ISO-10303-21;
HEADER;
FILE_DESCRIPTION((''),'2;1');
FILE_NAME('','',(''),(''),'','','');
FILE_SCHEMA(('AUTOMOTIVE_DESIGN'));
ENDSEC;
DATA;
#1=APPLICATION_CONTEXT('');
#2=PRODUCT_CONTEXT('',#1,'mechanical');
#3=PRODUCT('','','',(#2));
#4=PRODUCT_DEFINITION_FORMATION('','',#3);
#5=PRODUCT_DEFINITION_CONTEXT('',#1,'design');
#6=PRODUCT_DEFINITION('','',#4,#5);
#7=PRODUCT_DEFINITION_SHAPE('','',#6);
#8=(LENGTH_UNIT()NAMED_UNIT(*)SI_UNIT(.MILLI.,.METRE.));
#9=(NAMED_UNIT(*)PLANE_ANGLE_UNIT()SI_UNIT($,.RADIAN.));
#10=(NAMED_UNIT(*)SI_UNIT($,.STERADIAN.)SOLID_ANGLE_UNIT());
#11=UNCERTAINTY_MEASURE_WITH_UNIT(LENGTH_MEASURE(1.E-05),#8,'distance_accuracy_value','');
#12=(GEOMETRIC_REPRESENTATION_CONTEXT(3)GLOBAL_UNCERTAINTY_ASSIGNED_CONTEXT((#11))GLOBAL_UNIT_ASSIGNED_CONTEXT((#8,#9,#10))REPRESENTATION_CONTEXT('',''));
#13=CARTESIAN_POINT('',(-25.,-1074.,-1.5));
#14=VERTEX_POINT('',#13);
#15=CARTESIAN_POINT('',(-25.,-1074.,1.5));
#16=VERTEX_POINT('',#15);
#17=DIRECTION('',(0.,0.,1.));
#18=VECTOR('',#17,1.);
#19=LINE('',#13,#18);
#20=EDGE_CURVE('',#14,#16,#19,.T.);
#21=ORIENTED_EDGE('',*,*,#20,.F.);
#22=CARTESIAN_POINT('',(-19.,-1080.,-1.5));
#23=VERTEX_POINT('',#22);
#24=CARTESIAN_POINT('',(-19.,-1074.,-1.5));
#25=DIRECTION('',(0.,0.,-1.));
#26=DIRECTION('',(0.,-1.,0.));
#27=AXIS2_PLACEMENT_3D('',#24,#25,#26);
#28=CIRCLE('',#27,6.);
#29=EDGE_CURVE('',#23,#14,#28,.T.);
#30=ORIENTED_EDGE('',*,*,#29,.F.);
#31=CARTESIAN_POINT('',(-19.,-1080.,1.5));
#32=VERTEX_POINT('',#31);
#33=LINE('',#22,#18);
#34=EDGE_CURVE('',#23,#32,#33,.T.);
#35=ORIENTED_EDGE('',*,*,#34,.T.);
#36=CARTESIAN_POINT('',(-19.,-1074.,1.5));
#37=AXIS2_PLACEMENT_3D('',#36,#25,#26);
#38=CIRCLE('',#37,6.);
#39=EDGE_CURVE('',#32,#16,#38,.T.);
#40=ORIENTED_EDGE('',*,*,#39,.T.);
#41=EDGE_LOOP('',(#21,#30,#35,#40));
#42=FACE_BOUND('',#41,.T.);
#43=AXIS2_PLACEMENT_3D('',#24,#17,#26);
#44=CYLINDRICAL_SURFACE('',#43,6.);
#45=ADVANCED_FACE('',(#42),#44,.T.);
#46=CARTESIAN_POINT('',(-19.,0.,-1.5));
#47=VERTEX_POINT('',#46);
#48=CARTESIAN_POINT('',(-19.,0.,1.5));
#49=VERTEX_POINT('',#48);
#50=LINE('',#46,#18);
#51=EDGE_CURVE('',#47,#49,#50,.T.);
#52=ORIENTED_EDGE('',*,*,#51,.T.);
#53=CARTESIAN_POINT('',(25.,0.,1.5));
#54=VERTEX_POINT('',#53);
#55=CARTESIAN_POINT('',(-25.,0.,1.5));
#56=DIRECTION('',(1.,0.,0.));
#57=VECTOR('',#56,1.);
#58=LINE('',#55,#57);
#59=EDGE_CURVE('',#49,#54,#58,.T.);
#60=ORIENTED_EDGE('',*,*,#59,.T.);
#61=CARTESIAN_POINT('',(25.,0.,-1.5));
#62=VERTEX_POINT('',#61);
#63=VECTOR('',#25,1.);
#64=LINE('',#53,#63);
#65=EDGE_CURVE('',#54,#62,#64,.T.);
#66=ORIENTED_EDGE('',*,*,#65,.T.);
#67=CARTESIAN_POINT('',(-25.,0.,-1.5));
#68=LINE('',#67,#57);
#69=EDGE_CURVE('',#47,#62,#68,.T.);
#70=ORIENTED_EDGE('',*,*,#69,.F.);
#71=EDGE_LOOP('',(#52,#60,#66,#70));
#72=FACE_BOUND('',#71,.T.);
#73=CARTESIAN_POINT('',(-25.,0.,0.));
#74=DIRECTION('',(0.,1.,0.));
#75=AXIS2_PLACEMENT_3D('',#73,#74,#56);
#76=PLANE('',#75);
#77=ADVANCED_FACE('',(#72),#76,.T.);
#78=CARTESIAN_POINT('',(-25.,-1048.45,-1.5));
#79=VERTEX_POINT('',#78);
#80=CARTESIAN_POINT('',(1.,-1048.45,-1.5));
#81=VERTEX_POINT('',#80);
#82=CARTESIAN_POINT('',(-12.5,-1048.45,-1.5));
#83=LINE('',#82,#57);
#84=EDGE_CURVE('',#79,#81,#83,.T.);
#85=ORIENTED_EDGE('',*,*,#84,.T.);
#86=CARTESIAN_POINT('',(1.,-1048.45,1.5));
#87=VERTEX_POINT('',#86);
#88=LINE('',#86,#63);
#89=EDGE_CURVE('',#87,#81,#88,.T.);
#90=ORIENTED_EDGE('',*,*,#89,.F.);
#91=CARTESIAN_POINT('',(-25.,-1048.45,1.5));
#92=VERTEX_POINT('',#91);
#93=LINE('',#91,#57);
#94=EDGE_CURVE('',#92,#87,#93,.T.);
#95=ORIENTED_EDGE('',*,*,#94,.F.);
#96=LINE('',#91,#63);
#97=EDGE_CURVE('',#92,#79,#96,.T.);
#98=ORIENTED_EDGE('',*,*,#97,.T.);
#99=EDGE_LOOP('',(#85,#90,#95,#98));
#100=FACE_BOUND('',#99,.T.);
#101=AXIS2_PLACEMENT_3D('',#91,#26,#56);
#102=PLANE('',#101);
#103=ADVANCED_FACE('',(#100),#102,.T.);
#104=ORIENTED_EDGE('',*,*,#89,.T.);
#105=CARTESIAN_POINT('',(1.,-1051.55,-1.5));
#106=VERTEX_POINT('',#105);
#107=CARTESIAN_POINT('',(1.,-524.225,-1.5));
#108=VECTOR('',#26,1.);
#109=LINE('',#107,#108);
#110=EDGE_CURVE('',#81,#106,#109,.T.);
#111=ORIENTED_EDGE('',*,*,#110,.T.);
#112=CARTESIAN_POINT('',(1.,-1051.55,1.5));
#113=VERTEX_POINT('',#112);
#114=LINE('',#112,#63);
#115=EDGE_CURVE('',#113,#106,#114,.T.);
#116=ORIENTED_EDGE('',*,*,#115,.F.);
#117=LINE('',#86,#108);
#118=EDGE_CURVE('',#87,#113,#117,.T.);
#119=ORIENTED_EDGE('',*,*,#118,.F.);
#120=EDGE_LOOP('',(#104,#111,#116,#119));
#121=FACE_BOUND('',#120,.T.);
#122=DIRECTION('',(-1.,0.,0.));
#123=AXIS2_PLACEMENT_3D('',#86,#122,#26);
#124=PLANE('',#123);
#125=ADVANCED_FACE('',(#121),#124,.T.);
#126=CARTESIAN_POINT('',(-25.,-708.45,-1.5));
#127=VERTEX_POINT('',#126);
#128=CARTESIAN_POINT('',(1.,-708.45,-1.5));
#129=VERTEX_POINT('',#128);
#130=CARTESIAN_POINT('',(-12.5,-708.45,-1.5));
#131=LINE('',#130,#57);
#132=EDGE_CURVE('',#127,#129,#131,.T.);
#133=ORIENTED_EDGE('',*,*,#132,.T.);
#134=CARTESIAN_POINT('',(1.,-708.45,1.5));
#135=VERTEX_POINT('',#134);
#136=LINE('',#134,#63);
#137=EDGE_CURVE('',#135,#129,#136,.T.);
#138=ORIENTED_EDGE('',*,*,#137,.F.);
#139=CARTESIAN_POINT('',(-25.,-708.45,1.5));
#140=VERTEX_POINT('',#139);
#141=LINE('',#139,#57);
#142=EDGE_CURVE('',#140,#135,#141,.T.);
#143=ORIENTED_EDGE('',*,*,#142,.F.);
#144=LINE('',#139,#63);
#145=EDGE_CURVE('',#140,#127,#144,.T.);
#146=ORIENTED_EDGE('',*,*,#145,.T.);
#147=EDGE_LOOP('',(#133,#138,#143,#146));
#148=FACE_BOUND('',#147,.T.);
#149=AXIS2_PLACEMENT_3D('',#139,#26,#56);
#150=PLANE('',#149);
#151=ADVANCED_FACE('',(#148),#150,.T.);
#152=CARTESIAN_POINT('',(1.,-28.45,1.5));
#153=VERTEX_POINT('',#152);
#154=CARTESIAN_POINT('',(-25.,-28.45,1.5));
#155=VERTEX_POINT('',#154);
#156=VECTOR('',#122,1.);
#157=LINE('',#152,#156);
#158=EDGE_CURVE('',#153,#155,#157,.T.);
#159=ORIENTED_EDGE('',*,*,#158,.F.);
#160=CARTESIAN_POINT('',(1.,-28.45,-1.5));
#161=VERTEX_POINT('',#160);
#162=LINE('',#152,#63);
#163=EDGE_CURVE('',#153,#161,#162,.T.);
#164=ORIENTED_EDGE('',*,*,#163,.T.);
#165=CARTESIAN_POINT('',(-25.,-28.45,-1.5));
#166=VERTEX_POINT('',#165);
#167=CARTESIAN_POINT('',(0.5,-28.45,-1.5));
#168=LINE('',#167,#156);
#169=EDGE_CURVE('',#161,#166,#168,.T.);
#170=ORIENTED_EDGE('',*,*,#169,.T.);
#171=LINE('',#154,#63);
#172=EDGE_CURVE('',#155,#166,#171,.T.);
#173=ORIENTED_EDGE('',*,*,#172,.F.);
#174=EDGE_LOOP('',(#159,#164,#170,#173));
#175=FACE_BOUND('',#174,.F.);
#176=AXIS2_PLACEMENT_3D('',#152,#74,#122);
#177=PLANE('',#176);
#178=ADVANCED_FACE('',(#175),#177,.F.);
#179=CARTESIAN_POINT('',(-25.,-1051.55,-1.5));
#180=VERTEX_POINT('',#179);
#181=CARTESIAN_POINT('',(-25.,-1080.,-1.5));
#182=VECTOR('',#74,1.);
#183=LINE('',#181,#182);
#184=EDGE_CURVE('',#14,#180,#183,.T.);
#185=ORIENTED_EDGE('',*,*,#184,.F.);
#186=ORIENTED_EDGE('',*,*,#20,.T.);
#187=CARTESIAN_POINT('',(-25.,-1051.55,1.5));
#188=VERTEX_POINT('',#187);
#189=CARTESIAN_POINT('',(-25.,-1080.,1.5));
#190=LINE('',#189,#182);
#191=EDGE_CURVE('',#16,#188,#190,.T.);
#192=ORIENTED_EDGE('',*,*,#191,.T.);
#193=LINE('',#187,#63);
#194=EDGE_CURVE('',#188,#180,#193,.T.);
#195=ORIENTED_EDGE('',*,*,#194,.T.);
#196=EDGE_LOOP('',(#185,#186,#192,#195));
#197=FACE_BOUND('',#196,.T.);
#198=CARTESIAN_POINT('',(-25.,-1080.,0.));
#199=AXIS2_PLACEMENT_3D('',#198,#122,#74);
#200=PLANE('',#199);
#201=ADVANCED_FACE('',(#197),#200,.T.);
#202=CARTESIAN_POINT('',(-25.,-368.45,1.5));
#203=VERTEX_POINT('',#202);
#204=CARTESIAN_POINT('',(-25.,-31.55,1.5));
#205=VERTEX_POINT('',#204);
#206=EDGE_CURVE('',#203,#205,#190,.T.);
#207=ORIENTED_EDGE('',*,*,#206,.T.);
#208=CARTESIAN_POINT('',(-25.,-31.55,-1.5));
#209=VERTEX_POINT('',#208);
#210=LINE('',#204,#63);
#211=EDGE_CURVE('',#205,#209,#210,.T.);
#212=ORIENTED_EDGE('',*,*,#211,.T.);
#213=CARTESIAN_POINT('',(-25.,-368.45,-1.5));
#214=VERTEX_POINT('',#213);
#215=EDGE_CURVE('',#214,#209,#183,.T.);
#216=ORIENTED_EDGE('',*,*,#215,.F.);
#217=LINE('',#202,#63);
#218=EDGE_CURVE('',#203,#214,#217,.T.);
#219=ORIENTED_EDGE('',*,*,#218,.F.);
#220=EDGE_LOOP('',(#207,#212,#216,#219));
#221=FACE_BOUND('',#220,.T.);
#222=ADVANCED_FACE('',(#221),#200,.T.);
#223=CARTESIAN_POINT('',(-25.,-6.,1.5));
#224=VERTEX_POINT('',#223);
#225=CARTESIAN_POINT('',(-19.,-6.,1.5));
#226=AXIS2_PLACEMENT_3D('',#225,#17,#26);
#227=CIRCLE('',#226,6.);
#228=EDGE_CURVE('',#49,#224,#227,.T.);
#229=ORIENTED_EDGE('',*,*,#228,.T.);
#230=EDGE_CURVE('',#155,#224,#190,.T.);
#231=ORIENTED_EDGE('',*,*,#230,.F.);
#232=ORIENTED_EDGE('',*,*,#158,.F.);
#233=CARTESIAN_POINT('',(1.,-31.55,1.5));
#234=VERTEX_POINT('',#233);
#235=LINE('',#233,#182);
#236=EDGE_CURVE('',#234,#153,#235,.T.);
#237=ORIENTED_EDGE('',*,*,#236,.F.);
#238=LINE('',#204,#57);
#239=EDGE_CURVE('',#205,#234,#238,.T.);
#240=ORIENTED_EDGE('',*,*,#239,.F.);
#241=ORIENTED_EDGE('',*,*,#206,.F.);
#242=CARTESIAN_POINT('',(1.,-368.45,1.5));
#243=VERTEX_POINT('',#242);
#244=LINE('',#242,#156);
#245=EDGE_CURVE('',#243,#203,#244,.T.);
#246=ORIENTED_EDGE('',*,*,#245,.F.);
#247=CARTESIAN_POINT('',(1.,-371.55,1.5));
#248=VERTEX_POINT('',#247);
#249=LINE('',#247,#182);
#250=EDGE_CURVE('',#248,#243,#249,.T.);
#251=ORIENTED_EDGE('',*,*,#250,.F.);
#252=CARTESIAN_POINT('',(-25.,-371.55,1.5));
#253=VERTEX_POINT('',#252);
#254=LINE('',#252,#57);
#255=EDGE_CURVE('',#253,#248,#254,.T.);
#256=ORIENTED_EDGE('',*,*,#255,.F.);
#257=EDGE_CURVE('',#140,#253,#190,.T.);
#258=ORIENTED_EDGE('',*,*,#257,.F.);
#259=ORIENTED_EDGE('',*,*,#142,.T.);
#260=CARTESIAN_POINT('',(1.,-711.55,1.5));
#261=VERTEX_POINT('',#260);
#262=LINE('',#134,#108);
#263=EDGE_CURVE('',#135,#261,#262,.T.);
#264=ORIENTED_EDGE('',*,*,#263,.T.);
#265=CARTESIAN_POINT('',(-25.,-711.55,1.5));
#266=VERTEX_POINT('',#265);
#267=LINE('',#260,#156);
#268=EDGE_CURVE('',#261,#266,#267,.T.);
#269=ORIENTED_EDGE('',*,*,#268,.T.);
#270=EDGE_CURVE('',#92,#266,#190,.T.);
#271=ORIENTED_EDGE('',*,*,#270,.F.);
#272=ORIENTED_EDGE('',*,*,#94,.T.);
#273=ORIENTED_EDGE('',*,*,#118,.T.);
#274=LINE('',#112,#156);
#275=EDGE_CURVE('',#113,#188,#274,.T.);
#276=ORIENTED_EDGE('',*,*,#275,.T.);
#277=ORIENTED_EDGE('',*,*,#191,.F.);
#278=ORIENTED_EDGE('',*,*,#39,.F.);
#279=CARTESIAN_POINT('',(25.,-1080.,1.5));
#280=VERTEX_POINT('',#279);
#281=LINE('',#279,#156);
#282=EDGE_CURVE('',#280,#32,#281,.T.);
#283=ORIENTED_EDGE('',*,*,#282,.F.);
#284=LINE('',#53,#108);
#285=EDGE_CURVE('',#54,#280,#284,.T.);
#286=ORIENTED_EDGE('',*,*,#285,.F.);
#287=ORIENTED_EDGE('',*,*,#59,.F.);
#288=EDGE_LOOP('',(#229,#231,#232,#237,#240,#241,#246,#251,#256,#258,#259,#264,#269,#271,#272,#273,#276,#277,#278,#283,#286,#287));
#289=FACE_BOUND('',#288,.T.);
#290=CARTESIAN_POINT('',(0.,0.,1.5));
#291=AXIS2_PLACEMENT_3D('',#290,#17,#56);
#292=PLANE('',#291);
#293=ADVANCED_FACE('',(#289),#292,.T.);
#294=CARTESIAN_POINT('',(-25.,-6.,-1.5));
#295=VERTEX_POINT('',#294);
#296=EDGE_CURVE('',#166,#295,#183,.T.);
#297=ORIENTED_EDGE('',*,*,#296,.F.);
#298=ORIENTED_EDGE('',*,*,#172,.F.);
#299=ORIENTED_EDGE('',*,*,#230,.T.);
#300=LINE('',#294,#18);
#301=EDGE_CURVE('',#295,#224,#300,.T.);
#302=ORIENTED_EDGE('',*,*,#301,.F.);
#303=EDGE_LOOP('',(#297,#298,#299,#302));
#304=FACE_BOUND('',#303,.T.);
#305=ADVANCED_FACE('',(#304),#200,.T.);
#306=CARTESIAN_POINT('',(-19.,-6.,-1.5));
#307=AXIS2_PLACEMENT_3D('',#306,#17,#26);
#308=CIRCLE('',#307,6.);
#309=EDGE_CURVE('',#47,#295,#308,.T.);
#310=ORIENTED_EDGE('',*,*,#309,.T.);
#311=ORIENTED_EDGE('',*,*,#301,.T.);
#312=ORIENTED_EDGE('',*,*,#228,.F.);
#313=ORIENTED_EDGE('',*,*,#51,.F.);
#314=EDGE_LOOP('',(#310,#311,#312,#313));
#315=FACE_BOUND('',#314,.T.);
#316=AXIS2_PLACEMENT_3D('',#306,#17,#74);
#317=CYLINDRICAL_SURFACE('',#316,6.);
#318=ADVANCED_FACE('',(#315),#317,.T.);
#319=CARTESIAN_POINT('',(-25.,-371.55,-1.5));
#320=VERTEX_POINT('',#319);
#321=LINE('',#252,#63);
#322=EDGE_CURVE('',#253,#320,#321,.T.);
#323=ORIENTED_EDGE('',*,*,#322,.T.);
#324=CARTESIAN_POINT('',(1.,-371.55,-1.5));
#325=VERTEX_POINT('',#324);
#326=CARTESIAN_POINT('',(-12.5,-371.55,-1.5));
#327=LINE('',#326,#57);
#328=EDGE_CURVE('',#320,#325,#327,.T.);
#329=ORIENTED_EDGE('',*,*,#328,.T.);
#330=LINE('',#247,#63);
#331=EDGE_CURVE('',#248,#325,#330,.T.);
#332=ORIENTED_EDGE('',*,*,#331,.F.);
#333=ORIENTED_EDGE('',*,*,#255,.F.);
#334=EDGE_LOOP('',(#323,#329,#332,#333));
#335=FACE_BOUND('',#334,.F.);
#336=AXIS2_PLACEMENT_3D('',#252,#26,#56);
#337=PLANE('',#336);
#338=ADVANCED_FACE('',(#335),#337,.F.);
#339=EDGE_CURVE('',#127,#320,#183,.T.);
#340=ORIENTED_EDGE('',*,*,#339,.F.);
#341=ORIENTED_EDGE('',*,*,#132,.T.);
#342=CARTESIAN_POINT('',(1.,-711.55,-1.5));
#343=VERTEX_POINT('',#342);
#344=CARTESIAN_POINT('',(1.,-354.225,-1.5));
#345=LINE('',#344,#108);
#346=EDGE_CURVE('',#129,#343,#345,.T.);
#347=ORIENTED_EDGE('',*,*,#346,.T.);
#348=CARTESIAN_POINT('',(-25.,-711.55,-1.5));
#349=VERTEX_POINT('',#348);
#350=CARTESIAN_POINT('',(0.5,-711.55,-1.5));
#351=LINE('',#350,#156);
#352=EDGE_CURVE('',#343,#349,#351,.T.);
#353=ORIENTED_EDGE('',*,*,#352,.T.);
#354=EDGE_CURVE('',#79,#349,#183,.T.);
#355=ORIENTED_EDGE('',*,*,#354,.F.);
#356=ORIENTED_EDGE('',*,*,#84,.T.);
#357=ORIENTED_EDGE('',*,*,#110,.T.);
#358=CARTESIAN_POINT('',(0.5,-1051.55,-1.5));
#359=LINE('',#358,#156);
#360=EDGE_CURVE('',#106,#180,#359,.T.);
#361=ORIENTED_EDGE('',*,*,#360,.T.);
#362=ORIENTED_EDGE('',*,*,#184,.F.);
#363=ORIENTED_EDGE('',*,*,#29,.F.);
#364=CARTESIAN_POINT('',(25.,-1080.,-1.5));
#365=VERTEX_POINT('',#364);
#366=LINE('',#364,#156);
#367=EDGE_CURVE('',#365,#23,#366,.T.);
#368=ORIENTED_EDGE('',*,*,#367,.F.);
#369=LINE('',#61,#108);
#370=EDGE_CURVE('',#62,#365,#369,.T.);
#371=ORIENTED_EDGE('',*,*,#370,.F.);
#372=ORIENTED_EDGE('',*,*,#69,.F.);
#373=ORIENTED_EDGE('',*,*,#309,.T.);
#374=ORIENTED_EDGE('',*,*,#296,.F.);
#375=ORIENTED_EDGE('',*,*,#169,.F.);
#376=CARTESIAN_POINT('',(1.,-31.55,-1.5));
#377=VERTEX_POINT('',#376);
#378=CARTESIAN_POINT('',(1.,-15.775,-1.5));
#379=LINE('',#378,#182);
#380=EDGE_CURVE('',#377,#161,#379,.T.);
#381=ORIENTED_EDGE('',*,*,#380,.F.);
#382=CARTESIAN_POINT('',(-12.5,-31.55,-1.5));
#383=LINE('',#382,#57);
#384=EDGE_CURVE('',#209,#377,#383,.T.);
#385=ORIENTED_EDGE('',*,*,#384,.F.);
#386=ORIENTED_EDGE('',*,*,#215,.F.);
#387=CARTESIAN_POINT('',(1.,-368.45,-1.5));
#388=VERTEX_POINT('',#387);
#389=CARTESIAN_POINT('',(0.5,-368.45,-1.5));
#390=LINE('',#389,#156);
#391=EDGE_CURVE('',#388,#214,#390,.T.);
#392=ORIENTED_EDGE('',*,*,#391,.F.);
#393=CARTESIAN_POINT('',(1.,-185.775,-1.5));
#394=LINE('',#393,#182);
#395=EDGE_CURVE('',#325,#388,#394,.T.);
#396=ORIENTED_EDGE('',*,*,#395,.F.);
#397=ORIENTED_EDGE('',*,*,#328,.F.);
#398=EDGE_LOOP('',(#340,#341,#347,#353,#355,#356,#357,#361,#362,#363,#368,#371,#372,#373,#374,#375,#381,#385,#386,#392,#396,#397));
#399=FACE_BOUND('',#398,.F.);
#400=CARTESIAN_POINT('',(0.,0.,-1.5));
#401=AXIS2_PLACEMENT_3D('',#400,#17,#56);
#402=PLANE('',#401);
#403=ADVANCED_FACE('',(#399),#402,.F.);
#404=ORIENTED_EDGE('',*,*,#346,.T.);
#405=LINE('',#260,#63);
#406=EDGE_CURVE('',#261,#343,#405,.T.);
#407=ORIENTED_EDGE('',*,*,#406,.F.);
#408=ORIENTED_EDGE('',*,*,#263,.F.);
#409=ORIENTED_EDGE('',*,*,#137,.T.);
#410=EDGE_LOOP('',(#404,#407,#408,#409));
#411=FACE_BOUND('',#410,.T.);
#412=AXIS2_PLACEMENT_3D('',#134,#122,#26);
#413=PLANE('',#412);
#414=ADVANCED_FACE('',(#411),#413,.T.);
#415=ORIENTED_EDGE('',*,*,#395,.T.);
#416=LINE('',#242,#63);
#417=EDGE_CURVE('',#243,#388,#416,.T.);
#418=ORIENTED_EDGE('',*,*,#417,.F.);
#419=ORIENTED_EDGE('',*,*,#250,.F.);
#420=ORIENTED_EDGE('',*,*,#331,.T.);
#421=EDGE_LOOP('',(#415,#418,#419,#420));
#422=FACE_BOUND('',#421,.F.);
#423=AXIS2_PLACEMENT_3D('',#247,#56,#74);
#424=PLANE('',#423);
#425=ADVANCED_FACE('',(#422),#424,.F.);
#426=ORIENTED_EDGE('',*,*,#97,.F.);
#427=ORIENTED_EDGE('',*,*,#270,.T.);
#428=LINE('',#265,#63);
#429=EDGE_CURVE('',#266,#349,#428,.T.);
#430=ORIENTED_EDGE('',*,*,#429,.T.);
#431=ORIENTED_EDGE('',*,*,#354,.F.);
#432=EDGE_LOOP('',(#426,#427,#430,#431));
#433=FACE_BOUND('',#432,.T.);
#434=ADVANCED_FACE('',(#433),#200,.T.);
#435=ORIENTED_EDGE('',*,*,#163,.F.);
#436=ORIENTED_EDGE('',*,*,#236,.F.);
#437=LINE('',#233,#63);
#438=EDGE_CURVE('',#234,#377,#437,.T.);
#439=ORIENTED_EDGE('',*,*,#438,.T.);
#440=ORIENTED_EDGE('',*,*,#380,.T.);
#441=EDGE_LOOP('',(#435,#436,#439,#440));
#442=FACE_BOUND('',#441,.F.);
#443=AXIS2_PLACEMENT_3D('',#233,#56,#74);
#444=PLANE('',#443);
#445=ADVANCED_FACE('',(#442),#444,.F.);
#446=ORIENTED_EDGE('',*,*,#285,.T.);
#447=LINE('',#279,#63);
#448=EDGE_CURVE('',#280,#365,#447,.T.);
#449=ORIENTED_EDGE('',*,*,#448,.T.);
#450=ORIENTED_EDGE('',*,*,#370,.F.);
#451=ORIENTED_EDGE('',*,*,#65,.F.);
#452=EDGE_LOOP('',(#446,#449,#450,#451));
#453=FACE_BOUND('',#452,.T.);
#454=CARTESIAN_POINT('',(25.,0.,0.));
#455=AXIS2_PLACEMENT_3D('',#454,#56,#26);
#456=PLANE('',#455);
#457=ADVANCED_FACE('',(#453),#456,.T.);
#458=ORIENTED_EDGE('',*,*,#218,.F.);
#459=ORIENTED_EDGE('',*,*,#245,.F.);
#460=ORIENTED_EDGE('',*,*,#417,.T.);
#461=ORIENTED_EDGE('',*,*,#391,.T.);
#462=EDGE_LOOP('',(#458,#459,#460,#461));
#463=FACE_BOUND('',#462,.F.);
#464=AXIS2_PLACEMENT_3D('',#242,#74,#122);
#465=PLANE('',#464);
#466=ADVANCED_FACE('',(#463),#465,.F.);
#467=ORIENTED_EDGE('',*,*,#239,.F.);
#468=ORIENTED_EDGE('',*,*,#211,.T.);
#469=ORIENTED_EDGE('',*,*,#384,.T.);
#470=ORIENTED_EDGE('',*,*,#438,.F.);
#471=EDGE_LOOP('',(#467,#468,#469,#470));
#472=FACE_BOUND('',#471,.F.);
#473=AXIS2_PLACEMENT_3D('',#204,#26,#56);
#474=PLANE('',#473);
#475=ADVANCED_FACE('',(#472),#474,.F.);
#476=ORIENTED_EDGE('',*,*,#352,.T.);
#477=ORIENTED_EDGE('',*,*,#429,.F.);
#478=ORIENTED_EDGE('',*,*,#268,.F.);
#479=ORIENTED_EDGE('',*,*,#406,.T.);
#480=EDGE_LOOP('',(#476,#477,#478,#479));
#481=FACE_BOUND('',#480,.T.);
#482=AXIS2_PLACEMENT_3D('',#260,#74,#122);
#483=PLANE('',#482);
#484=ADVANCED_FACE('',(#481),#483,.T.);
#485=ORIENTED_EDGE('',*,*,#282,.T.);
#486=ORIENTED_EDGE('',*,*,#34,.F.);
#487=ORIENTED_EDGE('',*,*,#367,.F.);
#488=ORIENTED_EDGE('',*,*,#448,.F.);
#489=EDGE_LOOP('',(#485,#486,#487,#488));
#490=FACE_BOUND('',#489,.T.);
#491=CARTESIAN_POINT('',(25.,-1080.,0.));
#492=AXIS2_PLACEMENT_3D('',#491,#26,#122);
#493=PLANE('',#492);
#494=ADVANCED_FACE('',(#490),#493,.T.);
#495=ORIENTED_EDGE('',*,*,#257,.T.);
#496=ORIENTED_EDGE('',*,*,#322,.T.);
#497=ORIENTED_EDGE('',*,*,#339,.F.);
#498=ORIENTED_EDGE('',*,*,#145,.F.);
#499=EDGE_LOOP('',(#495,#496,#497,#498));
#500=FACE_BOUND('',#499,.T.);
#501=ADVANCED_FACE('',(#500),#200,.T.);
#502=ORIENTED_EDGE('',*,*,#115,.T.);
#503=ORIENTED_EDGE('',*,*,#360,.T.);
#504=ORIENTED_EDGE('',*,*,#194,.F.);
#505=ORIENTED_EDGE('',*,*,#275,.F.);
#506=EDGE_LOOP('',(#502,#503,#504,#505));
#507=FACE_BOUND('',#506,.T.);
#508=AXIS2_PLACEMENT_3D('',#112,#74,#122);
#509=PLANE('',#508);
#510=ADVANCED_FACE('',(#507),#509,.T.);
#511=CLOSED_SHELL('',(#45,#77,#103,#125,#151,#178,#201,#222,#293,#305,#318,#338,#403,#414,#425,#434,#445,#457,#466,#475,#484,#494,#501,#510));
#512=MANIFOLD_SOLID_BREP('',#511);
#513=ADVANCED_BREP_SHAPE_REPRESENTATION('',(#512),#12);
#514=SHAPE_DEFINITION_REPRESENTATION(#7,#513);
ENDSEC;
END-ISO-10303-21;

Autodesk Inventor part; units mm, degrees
ref_plane "YZ Plane" through (0, 0, 0) normal (1, 0, 0) x (0, 1, 0)
ref_plane "XZ Plane" through (0, 0, 0) normal (0, 1, 0) x (-1, 0, 0)
ref_plane "XY Plane" through (0, 0, 0) normal (0, 0, 1) x (1, 0, 0)
sketch "Sketch1" plane through (0, 0, 0) normal (0, 0, 1) x (1, 0, 0)
  line L0 (-25, 0) -> (25, 0)
  line L1 (25, 0) -> (25, -1080)
  line L2 (25, -1080) -> (-25, -1080)
  line L3 (-25, -1080) -> (-25, 0)
  point P0 (0, 0)
  point P1 (0, 0)
  point P2 (-25, -1153.2713)
  dimension "d0" = 50
  dimension "d1" = 1080
extrude "Plate1" add sketch "Sketch1" along normal mid plane 3
sketch "Sketch2" plane through (0, 0, 1.5) normal (0, 0, 1) x (1, 0, 0)
  line L0 (-25, -708.45) -> (1, -708.45)
  line L1 (1, -708.45) -> (1, -711.55)
  line L2 (1, -711.55) -> (-25, -711.55)
  line L3 (-25, -711.55) -> (-25, -708.45)
  line L4 (-25, -1080) -> (-25, 0) projected
  line L5 (-25, -371.55) -> (1, -371.55)
  line L6 (1, -371.55) -> (1, -368.45)
  line L7 (1, -368.45) -> (-25, -368.45)
  line L8 (-25, -368.45) -> (-25, -371.55)
  line L9 (-25, -1048.45) -> (1, -1048.45)
  line L10 (1, -1048.45) -> (1, -1051.55)
  line L11 (1, -1051.55) -> (-25, -1051.55)
  line L12 (-25, -1051.55) -> (-25, -1048.45)
  line L13 (-25, -31.55) -> (1, -31.55)
  line L14 (1, -31.55) -> (1, -28.45)
  line L15 (1, -28.45) -> (-25, -28.45)
  line L16 (-25, -28.45) -> (-25, -31.55)
  line L17 (-25, -540) -> (1, -540) construction
  point P0 (0, 0)
  point P1 (-25, -710)
  point P2 (-25, -370)
  point P3 (-25, -371.55)
  point P4 (-25, -1050)
  point P5 (-25, -30)
  point P6 (-25, -28.45)
  point P7 (-25, -31.55)
  point P8 (-25, -1048.45)
  point P9 (-25, -1051.55)
  dimension "d16" = 3.1
  dimension "d17" = 26
  dimension "d25" = 340
  dimension "d29" = 340
  dimension "d31" = 340
extrude "Extrusion1" cut sketch "Sketch2" against normal through all
fillet "Corner Round3" radius 6 2 edges at (-25, -1080, 0) (-25, 0, 0)
sketch "Sketch3" plane through (0, 0, -1.5) normal (0, 0, -1) x (-1, 0, 0)
  line L0 (5.4391, -935.4771) -> (-3.5887, -935.4771) construction
  line L1 (-3.5887, -935.4771) -> (-3.5887, -826.531) construction
  line L2 (-3.5887, -826.531) -> (5.4391, -826.531) construction
  line L3 (5.4391, -826.531) -> (5.4391, -935.4771) construction
  point P0 (0, 0)
  dimension "d2" = 3
  dimension "GapSize" = 3
  dimension "SeamGap" = 0.01
  dimension "Thickness" = 3
  dimension "BendRadius" = 5
  dimension "MinimumRemnant" = 6
  dimension "BendReliefDepth" = 1.5
  dimension "BendReliefWidth" = 3
  dimension "CornerReliefSize" = 12
  dimension "JacobiRadiusSize" = 5
  dimension "TransitionRadius" = 5
mark "Mark1"
equation "\"d2\" = Thickness"
equation "\"d25\" = d31"
equation "\"d29\" = d31"
equation "\"GapSize\" = Thickness"
equation "\"MinimumRemnant\" = 2 * Thickness"
equation "\"BendReliefDepth\" = 0.5 * Thickness"
equation "\"BendReliefWidth\" = Thickness"
equation "\"CornerReliefSize\" = 4 * Thickness"
equation "\"JacobiRadiusSize\" = BendRadius"
equation "\"TransitionRadius\" = BendRadius"
properties part number "MSC 605 RIB CONE EXIT BACK" material "Stainless Steel"
